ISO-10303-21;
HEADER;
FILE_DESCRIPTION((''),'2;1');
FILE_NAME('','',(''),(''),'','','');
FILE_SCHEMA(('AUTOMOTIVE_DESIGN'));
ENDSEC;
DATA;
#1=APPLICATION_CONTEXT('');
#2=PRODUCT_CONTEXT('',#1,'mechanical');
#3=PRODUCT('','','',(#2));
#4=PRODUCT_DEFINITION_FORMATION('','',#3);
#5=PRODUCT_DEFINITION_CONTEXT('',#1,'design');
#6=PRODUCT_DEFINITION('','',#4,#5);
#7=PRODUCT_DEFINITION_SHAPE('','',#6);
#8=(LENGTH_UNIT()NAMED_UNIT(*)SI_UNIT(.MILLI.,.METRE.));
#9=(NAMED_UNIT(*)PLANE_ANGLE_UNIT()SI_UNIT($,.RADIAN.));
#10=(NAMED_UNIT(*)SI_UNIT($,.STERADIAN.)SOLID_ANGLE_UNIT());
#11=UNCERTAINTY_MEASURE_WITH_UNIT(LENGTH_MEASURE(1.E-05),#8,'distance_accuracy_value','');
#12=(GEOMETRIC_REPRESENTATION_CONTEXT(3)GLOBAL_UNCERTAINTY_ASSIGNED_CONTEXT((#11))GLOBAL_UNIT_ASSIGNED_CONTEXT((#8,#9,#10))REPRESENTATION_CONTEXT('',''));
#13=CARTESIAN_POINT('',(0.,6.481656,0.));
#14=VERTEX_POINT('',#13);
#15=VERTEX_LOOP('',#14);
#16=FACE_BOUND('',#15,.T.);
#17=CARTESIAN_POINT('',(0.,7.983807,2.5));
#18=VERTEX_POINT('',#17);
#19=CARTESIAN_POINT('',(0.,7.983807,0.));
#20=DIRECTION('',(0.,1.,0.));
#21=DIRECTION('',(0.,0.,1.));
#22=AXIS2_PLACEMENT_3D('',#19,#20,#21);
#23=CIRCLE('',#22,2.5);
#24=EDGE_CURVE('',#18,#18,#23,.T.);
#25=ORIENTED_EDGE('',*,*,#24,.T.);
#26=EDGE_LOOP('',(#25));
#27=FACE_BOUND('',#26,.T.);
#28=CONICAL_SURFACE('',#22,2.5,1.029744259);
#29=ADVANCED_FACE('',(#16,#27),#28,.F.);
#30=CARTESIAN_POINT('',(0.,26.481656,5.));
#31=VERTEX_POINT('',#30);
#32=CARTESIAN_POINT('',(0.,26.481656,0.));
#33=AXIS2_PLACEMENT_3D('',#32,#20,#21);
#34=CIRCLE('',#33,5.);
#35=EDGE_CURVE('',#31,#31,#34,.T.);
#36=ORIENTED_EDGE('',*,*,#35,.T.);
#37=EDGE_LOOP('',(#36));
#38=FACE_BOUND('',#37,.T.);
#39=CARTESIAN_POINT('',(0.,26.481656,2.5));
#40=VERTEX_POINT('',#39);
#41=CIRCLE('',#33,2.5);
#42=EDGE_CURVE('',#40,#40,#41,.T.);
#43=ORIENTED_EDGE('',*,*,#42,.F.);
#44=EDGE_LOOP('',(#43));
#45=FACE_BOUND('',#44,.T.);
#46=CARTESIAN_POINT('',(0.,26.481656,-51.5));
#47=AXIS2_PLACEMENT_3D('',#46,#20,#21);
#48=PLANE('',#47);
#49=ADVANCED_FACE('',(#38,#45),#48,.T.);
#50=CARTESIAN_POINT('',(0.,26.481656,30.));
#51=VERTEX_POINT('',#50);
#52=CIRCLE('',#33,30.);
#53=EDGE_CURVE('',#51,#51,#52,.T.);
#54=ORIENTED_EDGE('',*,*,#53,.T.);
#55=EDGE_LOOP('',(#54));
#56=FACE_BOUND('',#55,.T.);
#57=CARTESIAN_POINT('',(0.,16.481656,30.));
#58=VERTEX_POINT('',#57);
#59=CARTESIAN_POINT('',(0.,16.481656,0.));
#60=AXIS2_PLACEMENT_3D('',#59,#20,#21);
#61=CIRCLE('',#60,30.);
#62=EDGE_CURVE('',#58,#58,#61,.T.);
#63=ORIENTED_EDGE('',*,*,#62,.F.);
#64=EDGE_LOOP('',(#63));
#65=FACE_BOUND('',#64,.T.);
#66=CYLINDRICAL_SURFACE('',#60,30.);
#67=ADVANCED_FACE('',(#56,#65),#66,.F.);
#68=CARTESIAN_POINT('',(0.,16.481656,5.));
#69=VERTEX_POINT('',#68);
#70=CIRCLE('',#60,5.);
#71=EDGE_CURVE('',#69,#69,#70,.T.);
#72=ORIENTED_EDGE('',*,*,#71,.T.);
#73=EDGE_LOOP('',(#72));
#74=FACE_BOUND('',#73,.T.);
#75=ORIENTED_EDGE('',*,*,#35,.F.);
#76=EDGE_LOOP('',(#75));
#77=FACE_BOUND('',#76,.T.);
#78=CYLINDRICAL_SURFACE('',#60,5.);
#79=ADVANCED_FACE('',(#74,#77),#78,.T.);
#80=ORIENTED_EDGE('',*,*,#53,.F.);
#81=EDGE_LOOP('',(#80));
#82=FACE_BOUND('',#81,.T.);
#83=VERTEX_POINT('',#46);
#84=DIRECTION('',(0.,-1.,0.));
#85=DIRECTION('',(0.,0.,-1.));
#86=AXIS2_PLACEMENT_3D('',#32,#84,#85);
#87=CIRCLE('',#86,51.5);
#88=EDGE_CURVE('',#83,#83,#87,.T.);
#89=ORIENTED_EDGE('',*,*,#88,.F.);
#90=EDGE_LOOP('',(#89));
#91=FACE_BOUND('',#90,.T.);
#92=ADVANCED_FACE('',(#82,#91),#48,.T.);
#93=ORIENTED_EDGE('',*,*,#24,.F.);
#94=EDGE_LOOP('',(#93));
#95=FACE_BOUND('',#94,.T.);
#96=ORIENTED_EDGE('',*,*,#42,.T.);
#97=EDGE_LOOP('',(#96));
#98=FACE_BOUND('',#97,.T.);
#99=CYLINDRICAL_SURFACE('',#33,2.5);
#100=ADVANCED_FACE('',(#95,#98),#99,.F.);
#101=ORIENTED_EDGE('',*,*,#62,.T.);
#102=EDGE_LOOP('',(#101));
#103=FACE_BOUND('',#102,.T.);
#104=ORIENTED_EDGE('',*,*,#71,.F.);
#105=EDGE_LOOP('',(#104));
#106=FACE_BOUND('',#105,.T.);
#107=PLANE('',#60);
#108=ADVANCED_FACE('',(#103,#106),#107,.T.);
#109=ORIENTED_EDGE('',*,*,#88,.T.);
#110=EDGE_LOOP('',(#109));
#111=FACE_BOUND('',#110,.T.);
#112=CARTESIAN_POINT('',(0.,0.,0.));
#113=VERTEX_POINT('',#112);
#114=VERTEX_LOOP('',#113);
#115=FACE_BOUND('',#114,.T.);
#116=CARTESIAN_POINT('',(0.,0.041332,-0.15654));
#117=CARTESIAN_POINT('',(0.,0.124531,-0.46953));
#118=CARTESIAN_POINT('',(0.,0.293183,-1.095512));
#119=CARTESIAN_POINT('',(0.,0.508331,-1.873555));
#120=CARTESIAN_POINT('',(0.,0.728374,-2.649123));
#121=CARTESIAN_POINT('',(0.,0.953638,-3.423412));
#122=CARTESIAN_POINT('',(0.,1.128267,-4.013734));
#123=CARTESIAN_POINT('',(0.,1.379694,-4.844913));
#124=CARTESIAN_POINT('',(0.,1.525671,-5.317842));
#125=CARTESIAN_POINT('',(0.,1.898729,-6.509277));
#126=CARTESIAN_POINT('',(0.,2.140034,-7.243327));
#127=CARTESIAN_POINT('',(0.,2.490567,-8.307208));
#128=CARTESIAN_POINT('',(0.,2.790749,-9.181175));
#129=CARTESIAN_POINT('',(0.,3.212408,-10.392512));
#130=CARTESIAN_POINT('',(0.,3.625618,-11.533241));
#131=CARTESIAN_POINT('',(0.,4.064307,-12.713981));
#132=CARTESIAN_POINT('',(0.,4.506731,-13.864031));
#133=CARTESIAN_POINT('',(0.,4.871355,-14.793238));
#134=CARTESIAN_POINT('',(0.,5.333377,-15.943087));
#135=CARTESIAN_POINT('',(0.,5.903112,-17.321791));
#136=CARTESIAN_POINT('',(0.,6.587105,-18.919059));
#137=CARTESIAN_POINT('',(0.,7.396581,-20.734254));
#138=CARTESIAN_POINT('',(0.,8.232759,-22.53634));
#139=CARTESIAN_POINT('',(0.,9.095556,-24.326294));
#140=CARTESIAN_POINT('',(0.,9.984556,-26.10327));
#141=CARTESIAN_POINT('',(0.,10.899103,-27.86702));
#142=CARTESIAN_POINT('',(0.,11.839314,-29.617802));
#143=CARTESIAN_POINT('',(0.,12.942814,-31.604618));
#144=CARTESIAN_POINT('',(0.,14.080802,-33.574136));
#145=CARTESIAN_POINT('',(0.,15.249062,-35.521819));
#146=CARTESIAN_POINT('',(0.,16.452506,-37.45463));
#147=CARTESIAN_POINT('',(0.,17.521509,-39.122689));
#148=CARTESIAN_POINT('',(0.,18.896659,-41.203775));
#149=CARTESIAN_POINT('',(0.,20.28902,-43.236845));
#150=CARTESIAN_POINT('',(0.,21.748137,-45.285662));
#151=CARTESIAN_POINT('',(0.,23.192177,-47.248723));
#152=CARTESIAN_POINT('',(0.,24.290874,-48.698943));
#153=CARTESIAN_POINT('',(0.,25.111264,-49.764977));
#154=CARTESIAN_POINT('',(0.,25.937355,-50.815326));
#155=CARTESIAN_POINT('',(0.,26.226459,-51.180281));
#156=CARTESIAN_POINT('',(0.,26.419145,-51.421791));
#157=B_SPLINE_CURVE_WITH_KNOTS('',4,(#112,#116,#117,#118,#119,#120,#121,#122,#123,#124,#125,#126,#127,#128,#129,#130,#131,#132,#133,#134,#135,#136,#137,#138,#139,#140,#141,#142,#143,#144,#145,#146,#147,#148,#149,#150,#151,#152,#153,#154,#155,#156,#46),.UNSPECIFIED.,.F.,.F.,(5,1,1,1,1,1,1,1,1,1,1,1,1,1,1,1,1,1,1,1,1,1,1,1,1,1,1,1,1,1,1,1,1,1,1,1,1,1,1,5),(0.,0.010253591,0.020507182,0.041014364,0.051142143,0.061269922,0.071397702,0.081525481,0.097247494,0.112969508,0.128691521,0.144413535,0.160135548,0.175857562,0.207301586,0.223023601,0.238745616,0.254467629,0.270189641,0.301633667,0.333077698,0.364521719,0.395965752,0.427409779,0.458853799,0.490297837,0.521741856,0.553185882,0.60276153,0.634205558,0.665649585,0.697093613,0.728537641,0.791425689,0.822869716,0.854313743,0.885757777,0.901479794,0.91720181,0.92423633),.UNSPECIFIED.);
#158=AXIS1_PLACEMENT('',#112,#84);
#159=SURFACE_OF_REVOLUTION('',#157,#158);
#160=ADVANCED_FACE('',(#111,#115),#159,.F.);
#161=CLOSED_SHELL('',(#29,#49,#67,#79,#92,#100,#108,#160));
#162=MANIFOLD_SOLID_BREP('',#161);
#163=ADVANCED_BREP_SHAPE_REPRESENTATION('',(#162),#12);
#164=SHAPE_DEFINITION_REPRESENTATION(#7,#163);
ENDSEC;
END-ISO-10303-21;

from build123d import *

# Parameters (mm, degrees)
SKETCH_3_R            = 30
SKETCH_3_R_2          = 5
CUT_EXTRUDE_2_DEPTH   = 10
HOLE_WIZARD_M61_D     = 5
HOLE_WIZARD_M61_DEPTH = 18.497848452
HOLE_WIZARD_M61_TIP   = 1.502151548


# Read off the part's stored shape, not the designer's step: Повернуть1
with BuildPart() as part:
    # Повернуть1 outline → Повернуть1 (revolve)
    with BuildSketch(Plane.XY):
        with BuildLine():
            Line((51.5, 26.48165559), (0, 26.48165559))
            Line((0, 26.48165559), (0, 0))
            add(Edge.make_bspline(
                [(0, 0), (0.156539895, 0.04133193), (0.469530076, 0.124531455), (1.095511669, 0.293183386), (1.873554951, 0.508331121), (2.649123351, 0.72837407), (3.423412252, 0.953638071), (4.013733879, 1.128266984), (4.844912611, 1.379694221), (5.317842465, 1.525671383), (6.509276852, 1.898728563), (7.243327053, 2.140034066), (8.307207562, 2.490567159), (9.181175291, 2.790749017), (10.392512094, 3.212408176), (11.533241177, 3.625618199), (12.713980503, 4.064307324), (13.864030789, 4.506730701), (14.793237788, 4.871354824), (15.943087068, 5.333377234), (17.321790678, 5.90311205), (18.91905871, 6.587105086), (20.734253685, 7.396581431), (22.536340181, 8.232758503), (24.326293905, 9.095556138), (26.103269747, 9.984556153), (27.867020214, 10.899103073), (29.617801935, 11.839314226), (31.60461842, 12.942813624), (33.574135616, 14.080801884), (35.521819214, 15.249061859), (37.454629603, 16.452505613), (39.122688535, 17.521509213), (41.203774914, 18.896658569), (43.236844805, 20.2890197), (45.285661909, 21.748137101), (47.248723401, 23.192176829), (48.69894305, 24.290874197), (49.764977395, 25.111263846), (50.815325911, 25.937355121), (51.180281148, 26.226459124), (51.421791087, 26.419144579), (51.5, 26.48165559)],
                knots=[0, 0, 0, 0, 0, 0.010253591, 0.020507182, 0.041014364, 0.051142143, 0.061269922, 0.071397702, 0.081525481, 0.097247494, 0.112969508, 0.128691521, 0.144413535, 0.160135548, 0.175857562, 0.207301586, 0.223023601, 0.238745616, 0.254467629, 0.270189641, 0.301633667, 0.333077698, 0.364521719, 0.395965752, 0.427409779, 0.458853799, 0.490297837, 0.521741856, 0.553185882, 0.60276153, 0.634205558, 0.665649585, 0.697093613, 0.728537641, 0.791425689, 0.822869716, 0.854313743, 0.885757777, 0.901479794, 0.91720181, 0.92423633, 0.92423633, 0.92423633, 0.92423633, 0.92423633], degree=4))
        make_face()
    revolve(axis=Axis((0, 0, 0), (0, 1, 0)))

    # Эскиз3 → Вырез-Вытянуть2 (cut)
    with BuildSketch(Plane(origin=(0, 26.48165559, 0), x_dir=(1, 0, 0), z_dir=(0, 1, 0))):
        with Locations(Location((0, 0, 0), (0, 0, 270))):
            Circle(SKETCH_3_R)
        with Locations(Location((0, 0, 0), (0, 0, 270))):
            Circle(SKETCH_3_R_2, mode=Mode.SUBTRACT)
    extrude(amount=-CUT_EXTRUDE_2_DEPTH, mode=Mode.SUBTRACT)

    # Отверстие обработанное метчиком M61
    with Locations(Plane(origin=(0, 26.48165559, 0), x_dir=(1, 0, 0), z_dir=(0, 1, 0))):
        with Locations((0, 0)):
            Hole(HOLE_WIZARD_M61_D / 2, depth=HOLE_WIZARD_M61_DEPTH)
            with Locations((0, 0, -(HOLE_WIZARD_M61_DEPTH + HOLE_WIZARD_M61_TIP / 2))):  # 118° drill point
                Cone(0, HOLE_WIZARD_M61_D / 2, HOLE_WIZARD_M61_TIP, mode=Mode.SUBTRACT)


solid = part.part
